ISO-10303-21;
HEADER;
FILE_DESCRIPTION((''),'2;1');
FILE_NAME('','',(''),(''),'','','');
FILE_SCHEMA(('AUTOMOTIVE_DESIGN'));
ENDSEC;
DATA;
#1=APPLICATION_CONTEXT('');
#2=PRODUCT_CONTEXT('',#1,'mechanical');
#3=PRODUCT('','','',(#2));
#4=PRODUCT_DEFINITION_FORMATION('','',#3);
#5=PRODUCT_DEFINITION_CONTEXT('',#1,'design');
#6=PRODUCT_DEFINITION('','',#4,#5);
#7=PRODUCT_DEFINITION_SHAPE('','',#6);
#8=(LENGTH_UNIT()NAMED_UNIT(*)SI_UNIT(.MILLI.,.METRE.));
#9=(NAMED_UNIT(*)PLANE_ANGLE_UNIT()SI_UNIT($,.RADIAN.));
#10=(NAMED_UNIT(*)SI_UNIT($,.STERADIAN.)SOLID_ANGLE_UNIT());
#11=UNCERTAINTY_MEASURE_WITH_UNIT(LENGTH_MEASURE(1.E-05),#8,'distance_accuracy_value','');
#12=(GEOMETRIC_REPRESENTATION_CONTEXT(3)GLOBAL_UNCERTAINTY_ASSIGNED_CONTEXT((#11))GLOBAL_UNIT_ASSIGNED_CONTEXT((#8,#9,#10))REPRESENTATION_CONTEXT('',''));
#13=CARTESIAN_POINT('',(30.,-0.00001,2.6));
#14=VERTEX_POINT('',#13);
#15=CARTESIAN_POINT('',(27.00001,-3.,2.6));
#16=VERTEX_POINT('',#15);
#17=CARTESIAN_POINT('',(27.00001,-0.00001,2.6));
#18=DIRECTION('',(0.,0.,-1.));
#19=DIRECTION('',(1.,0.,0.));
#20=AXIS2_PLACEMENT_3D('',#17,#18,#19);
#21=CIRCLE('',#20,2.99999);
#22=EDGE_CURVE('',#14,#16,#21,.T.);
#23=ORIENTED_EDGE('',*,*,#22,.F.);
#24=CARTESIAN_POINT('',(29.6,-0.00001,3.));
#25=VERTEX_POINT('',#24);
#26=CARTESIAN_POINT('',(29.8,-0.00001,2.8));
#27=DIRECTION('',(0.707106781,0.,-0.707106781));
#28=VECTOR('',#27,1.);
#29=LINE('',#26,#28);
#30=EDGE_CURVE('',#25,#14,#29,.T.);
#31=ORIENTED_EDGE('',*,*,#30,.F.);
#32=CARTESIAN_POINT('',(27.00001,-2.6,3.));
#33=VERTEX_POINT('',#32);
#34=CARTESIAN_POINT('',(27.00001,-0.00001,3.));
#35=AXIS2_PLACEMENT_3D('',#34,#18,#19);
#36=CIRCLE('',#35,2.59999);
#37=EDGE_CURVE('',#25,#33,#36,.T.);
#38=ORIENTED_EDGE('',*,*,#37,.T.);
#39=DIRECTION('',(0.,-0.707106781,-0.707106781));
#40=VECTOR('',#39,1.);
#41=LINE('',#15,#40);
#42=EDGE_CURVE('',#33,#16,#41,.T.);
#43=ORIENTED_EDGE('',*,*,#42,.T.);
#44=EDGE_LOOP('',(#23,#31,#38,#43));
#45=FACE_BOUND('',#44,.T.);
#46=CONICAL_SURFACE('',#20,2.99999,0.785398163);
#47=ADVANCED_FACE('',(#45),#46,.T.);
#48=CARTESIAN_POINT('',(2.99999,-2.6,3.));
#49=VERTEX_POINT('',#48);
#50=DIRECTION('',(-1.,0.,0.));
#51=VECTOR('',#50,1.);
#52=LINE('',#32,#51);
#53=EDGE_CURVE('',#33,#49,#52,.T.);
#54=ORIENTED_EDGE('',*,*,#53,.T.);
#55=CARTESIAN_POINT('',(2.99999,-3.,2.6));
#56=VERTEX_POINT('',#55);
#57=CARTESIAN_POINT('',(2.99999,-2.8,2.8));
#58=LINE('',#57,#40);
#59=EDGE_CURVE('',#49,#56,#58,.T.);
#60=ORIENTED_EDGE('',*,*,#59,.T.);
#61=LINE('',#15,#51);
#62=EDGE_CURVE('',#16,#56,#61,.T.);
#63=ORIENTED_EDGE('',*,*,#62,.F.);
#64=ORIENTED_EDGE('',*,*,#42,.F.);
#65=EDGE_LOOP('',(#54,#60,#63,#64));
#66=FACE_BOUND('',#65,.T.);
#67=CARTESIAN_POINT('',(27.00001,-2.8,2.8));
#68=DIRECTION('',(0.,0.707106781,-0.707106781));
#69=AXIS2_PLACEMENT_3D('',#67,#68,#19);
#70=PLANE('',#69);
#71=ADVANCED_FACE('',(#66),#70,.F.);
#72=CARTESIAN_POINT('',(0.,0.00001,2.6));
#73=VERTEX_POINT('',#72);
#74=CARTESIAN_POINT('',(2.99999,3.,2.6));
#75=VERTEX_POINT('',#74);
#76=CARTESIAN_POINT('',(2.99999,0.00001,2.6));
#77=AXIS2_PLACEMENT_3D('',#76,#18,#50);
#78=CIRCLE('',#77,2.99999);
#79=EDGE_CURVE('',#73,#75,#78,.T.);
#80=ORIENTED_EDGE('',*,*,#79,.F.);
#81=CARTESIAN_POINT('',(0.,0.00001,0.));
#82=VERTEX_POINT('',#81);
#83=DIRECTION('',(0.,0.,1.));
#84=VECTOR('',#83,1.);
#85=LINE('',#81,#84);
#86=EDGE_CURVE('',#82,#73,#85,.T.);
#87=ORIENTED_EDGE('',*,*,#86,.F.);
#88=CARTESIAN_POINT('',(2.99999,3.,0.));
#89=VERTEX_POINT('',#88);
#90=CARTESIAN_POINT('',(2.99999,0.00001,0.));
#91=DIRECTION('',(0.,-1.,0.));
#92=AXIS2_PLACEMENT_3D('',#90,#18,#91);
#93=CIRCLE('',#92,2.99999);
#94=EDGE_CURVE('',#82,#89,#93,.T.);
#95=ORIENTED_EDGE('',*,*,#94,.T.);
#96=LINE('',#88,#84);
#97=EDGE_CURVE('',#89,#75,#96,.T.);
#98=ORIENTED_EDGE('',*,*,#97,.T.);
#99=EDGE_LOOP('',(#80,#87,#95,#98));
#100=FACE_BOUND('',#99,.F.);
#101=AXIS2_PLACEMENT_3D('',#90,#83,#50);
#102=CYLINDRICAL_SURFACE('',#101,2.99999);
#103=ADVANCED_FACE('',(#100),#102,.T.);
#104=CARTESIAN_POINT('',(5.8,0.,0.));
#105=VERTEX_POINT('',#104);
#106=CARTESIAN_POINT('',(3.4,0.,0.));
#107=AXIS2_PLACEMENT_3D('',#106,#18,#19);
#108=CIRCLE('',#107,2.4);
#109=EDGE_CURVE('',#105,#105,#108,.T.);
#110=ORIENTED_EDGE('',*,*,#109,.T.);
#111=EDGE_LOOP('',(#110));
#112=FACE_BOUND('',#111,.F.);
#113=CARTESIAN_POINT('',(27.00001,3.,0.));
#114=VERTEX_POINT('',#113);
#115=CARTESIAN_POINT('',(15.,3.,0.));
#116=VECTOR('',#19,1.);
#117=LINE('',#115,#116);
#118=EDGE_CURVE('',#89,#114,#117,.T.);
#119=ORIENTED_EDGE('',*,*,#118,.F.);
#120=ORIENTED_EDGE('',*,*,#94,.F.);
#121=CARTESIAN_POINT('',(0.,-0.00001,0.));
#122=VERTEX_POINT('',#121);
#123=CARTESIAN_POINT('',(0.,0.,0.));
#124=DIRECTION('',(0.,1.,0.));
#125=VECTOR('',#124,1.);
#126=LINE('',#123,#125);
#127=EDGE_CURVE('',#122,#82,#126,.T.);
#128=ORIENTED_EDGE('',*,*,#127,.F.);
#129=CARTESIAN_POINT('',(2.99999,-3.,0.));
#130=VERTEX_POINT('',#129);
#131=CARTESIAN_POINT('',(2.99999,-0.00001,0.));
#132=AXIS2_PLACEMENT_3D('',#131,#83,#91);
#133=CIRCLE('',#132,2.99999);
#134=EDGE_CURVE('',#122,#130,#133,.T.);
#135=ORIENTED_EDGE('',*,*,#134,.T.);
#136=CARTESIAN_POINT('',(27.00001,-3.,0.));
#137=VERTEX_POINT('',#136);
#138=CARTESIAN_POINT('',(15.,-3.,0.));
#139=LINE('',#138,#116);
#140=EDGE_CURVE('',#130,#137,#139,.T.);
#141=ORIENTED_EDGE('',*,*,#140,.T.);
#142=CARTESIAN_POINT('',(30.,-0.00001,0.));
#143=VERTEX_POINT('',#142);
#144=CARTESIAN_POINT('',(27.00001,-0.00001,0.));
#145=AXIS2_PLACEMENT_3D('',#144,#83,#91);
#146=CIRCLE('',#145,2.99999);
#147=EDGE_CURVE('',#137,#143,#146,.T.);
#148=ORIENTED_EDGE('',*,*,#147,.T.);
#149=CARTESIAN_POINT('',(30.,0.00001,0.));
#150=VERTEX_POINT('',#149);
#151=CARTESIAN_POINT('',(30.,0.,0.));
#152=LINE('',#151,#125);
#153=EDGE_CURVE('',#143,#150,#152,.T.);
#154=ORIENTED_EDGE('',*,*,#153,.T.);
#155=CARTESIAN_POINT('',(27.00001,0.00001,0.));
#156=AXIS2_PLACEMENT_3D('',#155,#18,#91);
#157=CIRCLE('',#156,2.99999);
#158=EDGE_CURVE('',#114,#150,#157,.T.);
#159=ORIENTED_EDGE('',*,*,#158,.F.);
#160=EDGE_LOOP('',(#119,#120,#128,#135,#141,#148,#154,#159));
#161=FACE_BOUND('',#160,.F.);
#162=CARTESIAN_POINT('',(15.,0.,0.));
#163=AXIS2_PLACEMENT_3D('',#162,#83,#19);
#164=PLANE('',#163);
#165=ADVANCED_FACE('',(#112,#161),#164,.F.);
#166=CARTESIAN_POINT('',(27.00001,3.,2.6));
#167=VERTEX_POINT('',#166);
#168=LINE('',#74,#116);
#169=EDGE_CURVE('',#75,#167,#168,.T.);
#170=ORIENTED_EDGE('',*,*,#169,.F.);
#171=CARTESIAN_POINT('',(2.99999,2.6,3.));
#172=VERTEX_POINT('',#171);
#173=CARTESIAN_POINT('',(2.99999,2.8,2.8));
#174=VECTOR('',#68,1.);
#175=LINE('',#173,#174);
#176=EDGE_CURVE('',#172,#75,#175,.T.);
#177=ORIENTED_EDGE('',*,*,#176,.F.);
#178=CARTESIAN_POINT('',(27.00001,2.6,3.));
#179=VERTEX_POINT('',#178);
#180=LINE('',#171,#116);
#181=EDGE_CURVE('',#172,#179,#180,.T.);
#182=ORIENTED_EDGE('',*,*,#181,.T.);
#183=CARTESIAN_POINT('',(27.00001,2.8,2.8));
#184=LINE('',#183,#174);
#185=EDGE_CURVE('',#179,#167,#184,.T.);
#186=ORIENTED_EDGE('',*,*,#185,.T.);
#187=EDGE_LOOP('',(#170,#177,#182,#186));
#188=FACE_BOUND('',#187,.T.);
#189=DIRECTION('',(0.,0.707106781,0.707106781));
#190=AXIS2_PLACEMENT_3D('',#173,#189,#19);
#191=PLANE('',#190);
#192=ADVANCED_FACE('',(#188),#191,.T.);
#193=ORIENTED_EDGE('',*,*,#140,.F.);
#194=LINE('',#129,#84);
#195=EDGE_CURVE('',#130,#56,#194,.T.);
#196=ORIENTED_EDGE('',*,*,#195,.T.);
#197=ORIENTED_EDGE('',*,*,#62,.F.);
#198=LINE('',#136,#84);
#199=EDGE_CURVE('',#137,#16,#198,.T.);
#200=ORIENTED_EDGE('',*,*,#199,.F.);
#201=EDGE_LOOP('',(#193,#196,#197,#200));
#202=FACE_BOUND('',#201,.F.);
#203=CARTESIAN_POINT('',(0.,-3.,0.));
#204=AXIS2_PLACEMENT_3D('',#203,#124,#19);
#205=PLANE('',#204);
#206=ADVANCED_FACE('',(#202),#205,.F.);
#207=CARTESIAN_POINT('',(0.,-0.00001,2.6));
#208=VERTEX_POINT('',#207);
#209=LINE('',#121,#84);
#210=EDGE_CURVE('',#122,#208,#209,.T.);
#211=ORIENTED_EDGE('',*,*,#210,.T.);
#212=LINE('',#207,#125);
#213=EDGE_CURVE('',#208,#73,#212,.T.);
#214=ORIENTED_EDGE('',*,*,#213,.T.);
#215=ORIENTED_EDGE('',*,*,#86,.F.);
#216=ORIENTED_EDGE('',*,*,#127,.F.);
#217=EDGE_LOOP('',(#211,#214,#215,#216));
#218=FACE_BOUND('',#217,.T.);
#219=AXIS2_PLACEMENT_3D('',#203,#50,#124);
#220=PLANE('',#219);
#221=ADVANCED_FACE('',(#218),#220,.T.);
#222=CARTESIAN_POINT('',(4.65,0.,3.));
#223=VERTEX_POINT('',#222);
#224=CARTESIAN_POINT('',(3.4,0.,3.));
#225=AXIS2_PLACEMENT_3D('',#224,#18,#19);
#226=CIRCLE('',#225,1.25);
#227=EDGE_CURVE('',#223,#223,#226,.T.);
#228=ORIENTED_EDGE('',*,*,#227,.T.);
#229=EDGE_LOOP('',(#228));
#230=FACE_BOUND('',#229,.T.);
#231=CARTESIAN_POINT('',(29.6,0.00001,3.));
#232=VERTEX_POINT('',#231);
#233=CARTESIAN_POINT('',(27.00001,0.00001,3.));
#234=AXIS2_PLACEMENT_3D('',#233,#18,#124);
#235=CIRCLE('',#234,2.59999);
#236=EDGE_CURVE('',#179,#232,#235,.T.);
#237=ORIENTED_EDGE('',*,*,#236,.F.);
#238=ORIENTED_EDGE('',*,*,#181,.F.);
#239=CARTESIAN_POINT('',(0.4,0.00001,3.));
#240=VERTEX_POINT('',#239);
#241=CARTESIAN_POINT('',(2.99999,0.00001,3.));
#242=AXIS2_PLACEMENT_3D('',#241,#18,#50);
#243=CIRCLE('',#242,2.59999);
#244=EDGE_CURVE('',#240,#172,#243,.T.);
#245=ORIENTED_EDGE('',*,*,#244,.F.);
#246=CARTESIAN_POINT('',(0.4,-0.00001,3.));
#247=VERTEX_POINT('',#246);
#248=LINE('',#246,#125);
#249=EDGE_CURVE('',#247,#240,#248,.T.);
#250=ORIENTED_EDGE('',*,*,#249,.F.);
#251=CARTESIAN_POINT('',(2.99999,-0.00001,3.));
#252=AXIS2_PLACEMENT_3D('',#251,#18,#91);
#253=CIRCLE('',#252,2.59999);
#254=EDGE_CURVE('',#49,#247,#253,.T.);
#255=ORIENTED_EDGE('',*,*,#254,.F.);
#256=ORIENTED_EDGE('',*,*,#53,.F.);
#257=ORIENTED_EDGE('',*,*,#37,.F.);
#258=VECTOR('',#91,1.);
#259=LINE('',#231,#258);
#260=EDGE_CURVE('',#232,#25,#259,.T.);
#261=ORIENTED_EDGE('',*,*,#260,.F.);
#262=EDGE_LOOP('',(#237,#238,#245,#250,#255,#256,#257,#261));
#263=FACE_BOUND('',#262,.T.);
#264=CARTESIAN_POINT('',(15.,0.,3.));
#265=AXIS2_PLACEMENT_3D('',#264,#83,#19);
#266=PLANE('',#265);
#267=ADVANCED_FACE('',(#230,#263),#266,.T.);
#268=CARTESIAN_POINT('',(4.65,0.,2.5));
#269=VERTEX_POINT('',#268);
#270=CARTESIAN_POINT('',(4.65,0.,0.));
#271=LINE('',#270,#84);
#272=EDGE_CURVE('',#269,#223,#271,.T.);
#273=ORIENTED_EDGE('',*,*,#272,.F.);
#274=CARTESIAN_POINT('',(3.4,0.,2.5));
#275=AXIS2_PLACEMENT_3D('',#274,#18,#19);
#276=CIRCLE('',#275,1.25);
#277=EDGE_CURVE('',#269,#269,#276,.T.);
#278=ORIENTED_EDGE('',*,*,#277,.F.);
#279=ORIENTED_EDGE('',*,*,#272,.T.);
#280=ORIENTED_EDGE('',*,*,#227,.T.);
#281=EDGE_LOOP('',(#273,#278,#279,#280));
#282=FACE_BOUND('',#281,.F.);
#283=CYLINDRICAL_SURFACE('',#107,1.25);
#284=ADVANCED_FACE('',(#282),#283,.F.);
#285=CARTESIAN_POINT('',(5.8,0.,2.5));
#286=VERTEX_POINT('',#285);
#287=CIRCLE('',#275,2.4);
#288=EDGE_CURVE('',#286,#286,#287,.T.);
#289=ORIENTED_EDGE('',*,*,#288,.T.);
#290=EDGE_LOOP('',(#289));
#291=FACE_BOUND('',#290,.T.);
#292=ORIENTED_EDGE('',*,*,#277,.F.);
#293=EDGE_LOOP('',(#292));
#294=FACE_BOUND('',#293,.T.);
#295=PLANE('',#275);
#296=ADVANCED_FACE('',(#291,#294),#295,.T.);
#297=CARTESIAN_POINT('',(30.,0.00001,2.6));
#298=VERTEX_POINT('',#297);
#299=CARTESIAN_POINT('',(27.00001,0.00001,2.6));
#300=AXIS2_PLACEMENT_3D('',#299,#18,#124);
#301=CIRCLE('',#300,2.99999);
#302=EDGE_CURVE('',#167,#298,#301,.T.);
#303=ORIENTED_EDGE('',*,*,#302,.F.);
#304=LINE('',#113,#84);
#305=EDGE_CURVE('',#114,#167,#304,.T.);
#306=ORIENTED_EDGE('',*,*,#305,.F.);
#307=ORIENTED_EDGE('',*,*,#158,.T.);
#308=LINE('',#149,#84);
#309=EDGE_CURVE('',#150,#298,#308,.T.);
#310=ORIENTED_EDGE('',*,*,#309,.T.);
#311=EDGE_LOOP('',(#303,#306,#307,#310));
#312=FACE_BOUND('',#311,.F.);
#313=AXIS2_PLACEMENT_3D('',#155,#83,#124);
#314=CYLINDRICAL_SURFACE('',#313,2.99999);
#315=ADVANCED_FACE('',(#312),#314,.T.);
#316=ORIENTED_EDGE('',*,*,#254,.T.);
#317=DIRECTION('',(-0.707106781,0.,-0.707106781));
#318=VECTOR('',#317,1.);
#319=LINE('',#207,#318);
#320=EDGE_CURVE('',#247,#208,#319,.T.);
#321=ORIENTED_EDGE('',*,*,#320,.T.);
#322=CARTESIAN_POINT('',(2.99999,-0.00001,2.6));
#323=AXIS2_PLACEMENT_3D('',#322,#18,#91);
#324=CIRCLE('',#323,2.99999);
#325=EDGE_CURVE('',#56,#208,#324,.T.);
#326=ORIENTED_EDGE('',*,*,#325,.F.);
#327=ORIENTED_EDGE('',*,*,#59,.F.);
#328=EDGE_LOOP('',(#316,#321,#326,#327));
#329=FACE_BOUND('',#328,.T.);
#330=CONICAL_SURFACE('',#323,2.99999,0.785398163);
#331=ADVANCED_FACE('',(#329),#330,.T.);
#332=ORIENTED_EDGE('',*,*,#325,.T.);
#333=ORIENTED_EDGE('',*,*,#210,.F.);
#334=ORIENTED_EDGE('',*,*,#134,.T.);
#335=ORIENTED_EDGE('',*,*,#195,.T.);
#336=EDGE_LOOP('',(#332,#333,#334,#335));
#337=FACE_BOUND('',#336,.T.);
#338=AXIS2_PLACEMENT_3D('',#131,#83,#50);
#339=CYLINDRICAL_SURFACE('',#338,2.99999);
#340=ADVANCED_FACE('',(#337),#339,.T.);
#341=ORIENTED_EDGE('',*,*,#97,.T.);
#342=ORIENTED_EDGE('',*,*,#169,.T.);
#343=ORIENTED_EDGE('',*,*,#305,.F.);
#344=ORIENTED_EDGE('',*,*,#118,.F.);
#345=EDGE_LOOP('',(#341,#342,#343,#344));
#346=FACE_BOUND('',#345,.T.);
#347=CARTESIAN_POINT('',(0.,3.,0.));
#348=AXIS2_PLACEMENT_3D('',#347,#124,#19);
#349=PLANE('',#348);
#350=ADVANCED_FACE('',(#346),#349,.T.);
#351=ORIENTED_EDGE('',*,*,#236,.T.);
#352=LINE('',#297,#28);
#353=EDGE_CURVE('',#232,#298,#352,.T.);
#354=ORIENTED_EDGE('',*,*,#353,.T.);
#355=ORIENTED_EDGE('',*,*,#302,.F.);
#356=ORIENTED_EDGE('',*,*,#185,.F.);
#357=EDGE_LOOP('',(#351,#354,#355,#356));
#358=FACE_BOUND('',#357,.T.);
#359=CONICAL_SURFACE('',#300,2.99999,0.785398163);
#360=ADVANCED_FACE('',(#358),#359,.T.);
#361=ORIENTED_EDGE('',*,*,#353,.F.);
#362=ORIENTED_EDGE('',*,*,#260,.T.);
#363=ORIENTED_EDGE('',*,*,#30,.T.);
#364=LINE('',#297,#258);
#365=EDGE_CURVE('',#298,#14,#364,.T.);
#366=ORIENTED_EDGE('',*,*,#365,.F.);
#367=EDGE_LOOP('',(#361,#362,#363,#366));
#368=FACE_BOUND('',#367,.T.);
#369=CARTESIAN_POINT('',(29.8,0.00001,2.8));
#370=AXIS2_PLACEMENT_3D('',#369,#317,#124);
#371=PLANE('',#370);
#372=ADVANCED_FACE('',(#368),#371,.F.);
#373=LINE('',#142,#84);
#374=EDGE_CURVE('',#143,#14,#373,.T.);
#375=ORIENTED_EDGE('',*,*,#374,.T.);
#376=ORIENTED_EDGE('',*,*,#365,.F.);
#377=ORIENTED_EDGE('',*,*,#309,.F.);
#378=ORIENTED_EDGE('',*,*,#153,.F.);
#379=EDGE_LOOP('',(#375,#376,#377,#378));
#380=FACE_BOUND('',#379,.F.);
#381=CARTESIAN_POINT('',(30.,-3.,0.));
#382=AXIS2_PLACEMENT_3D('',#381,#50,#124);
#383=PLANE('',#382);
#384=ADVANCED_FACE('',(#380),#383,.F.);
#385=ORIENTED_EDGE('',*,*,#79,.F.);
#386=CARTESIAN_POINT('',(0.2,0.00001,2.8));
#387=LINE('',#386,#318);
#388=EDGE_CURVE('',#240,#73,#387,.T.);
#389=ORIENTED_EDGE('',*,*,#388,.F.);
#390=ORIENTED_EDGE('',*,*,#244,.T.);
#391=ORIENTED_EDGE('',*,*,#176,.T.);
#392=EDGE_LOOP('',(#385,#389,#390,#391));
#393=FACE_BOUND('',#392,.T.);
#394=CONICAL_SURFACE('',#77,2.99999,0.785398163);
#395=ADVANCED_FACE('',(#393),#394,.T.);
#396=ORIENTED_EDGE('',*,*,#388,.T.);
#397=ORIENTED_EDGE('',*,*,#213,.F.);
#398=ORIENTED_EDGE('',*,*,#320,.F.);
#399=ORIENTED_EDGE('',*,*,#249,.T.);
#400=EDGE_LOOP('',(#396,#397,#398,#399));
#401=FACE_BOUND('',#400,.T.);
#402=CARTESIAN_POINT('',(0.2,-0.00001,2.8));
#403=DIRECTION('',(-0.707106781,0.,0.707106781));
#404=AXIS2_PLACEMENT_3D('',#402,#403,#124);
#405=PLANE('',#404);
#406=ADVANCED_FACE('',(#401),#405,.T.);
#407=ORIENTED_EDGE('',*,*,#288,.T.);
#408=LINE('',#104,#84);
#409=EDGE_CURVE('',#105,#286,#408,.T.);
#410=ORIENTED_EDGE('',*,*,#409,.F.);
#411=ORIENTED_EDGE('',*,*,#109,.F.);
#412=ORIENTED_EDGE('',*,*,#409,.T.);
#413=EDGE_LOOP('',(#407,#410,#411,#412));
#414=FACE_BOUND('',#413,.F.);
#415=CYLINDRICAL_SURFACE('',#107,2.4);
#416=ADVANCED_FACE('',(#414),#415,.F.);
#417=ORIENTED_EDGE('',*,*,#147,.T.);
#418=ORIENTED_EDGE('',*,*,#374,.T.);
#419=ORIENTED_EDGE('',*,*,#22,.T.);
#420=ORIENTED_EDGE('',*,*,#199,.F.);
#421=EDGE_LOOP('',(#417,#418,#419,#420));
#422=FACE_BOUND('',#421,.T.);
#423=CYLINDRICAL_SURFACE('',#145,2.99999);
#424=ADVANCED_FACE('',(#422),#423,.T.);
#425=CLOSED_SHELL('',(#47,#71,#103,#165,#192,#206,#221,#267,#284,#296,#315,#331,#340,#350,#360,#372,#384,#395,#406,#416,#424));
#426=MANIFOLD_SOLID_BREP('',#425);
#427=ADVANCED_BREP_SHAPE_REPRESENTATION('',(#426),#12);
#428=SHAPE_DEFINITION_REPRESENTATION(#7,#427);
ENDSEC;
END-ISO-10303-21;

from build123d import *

# Parameters (mm, degrees)
F0_W     = 30
F0_H     = 6
F1_DEPTH = 3
F2_R     = 2.4
F2_R_2   = 1.25
F3_DEPTH = 2.5
F4_DEPTH = 3.001
F5_R     = 2.99999
F6_SIZE  = 0.4


# Not quite as in the source:
# - a fillet or chamfer is up to 0.001 mm smaller than in the source, because OpenCascade refuses the exact size


with BuildPart() as f1:
    # F0 (on Top) → F1 (new body)
    with BuildSketch(Plane.XY):
        with Locations((15, 0)):
            Rectangle(F0_W, F0_H)
    extrude(amount=F1_DEPTH)

    # F2 (on face) → F3 (cut)
    with BuildSketch(Plane(origin=(0, 0, 0), x_dir=(1, 0, 0), z_dir=(0, 0, -1))):
        with Locations((3.4, 0)):
            Circle(F2_R)
        with Locations((3.4, 0)):
            Circle(F2_R_2, mode=Mode.SUBTRACT)
        with Locations((3.4, 0)):
            Circle(F2_R_2)
    extrude(amount=-F3_DEPTH, mode=Mode.SUBTRACT)

    # F2 (on face) → F4 (cut, through all)
    with BuildSketch(Plane(origin=(0, 0, 0), x_dir=(1, 0, 0), z_dir=(0, 0, -1))):
        with Locations((3.4, 0)):
            Circle(F2_R_2)
    extrude(amount=-F4_DEPTH, mode=Mode.SUBTRACT)

    # F5 (radius 3 in the source; OpenCascade refuses exactly that, so slightly less here)
    f5_edges = [f1.edges().sort_by_distance(p)[0] for p in [
        (0, -3, 1.5),
        (0, 3, 1.5),
        (30, -3, 1.5),
        (30, 3, 1.5),
    ]]
    fillet(f5_edges, radius=F5_R)

    # F6
    f6_edges = [f1.edges().sort_by_distance(p)[0] for p in [
        (15, 3, 3),
    ]]
    chamfer(f6_edges, length=F6_SIZE)


solid = f1.part
